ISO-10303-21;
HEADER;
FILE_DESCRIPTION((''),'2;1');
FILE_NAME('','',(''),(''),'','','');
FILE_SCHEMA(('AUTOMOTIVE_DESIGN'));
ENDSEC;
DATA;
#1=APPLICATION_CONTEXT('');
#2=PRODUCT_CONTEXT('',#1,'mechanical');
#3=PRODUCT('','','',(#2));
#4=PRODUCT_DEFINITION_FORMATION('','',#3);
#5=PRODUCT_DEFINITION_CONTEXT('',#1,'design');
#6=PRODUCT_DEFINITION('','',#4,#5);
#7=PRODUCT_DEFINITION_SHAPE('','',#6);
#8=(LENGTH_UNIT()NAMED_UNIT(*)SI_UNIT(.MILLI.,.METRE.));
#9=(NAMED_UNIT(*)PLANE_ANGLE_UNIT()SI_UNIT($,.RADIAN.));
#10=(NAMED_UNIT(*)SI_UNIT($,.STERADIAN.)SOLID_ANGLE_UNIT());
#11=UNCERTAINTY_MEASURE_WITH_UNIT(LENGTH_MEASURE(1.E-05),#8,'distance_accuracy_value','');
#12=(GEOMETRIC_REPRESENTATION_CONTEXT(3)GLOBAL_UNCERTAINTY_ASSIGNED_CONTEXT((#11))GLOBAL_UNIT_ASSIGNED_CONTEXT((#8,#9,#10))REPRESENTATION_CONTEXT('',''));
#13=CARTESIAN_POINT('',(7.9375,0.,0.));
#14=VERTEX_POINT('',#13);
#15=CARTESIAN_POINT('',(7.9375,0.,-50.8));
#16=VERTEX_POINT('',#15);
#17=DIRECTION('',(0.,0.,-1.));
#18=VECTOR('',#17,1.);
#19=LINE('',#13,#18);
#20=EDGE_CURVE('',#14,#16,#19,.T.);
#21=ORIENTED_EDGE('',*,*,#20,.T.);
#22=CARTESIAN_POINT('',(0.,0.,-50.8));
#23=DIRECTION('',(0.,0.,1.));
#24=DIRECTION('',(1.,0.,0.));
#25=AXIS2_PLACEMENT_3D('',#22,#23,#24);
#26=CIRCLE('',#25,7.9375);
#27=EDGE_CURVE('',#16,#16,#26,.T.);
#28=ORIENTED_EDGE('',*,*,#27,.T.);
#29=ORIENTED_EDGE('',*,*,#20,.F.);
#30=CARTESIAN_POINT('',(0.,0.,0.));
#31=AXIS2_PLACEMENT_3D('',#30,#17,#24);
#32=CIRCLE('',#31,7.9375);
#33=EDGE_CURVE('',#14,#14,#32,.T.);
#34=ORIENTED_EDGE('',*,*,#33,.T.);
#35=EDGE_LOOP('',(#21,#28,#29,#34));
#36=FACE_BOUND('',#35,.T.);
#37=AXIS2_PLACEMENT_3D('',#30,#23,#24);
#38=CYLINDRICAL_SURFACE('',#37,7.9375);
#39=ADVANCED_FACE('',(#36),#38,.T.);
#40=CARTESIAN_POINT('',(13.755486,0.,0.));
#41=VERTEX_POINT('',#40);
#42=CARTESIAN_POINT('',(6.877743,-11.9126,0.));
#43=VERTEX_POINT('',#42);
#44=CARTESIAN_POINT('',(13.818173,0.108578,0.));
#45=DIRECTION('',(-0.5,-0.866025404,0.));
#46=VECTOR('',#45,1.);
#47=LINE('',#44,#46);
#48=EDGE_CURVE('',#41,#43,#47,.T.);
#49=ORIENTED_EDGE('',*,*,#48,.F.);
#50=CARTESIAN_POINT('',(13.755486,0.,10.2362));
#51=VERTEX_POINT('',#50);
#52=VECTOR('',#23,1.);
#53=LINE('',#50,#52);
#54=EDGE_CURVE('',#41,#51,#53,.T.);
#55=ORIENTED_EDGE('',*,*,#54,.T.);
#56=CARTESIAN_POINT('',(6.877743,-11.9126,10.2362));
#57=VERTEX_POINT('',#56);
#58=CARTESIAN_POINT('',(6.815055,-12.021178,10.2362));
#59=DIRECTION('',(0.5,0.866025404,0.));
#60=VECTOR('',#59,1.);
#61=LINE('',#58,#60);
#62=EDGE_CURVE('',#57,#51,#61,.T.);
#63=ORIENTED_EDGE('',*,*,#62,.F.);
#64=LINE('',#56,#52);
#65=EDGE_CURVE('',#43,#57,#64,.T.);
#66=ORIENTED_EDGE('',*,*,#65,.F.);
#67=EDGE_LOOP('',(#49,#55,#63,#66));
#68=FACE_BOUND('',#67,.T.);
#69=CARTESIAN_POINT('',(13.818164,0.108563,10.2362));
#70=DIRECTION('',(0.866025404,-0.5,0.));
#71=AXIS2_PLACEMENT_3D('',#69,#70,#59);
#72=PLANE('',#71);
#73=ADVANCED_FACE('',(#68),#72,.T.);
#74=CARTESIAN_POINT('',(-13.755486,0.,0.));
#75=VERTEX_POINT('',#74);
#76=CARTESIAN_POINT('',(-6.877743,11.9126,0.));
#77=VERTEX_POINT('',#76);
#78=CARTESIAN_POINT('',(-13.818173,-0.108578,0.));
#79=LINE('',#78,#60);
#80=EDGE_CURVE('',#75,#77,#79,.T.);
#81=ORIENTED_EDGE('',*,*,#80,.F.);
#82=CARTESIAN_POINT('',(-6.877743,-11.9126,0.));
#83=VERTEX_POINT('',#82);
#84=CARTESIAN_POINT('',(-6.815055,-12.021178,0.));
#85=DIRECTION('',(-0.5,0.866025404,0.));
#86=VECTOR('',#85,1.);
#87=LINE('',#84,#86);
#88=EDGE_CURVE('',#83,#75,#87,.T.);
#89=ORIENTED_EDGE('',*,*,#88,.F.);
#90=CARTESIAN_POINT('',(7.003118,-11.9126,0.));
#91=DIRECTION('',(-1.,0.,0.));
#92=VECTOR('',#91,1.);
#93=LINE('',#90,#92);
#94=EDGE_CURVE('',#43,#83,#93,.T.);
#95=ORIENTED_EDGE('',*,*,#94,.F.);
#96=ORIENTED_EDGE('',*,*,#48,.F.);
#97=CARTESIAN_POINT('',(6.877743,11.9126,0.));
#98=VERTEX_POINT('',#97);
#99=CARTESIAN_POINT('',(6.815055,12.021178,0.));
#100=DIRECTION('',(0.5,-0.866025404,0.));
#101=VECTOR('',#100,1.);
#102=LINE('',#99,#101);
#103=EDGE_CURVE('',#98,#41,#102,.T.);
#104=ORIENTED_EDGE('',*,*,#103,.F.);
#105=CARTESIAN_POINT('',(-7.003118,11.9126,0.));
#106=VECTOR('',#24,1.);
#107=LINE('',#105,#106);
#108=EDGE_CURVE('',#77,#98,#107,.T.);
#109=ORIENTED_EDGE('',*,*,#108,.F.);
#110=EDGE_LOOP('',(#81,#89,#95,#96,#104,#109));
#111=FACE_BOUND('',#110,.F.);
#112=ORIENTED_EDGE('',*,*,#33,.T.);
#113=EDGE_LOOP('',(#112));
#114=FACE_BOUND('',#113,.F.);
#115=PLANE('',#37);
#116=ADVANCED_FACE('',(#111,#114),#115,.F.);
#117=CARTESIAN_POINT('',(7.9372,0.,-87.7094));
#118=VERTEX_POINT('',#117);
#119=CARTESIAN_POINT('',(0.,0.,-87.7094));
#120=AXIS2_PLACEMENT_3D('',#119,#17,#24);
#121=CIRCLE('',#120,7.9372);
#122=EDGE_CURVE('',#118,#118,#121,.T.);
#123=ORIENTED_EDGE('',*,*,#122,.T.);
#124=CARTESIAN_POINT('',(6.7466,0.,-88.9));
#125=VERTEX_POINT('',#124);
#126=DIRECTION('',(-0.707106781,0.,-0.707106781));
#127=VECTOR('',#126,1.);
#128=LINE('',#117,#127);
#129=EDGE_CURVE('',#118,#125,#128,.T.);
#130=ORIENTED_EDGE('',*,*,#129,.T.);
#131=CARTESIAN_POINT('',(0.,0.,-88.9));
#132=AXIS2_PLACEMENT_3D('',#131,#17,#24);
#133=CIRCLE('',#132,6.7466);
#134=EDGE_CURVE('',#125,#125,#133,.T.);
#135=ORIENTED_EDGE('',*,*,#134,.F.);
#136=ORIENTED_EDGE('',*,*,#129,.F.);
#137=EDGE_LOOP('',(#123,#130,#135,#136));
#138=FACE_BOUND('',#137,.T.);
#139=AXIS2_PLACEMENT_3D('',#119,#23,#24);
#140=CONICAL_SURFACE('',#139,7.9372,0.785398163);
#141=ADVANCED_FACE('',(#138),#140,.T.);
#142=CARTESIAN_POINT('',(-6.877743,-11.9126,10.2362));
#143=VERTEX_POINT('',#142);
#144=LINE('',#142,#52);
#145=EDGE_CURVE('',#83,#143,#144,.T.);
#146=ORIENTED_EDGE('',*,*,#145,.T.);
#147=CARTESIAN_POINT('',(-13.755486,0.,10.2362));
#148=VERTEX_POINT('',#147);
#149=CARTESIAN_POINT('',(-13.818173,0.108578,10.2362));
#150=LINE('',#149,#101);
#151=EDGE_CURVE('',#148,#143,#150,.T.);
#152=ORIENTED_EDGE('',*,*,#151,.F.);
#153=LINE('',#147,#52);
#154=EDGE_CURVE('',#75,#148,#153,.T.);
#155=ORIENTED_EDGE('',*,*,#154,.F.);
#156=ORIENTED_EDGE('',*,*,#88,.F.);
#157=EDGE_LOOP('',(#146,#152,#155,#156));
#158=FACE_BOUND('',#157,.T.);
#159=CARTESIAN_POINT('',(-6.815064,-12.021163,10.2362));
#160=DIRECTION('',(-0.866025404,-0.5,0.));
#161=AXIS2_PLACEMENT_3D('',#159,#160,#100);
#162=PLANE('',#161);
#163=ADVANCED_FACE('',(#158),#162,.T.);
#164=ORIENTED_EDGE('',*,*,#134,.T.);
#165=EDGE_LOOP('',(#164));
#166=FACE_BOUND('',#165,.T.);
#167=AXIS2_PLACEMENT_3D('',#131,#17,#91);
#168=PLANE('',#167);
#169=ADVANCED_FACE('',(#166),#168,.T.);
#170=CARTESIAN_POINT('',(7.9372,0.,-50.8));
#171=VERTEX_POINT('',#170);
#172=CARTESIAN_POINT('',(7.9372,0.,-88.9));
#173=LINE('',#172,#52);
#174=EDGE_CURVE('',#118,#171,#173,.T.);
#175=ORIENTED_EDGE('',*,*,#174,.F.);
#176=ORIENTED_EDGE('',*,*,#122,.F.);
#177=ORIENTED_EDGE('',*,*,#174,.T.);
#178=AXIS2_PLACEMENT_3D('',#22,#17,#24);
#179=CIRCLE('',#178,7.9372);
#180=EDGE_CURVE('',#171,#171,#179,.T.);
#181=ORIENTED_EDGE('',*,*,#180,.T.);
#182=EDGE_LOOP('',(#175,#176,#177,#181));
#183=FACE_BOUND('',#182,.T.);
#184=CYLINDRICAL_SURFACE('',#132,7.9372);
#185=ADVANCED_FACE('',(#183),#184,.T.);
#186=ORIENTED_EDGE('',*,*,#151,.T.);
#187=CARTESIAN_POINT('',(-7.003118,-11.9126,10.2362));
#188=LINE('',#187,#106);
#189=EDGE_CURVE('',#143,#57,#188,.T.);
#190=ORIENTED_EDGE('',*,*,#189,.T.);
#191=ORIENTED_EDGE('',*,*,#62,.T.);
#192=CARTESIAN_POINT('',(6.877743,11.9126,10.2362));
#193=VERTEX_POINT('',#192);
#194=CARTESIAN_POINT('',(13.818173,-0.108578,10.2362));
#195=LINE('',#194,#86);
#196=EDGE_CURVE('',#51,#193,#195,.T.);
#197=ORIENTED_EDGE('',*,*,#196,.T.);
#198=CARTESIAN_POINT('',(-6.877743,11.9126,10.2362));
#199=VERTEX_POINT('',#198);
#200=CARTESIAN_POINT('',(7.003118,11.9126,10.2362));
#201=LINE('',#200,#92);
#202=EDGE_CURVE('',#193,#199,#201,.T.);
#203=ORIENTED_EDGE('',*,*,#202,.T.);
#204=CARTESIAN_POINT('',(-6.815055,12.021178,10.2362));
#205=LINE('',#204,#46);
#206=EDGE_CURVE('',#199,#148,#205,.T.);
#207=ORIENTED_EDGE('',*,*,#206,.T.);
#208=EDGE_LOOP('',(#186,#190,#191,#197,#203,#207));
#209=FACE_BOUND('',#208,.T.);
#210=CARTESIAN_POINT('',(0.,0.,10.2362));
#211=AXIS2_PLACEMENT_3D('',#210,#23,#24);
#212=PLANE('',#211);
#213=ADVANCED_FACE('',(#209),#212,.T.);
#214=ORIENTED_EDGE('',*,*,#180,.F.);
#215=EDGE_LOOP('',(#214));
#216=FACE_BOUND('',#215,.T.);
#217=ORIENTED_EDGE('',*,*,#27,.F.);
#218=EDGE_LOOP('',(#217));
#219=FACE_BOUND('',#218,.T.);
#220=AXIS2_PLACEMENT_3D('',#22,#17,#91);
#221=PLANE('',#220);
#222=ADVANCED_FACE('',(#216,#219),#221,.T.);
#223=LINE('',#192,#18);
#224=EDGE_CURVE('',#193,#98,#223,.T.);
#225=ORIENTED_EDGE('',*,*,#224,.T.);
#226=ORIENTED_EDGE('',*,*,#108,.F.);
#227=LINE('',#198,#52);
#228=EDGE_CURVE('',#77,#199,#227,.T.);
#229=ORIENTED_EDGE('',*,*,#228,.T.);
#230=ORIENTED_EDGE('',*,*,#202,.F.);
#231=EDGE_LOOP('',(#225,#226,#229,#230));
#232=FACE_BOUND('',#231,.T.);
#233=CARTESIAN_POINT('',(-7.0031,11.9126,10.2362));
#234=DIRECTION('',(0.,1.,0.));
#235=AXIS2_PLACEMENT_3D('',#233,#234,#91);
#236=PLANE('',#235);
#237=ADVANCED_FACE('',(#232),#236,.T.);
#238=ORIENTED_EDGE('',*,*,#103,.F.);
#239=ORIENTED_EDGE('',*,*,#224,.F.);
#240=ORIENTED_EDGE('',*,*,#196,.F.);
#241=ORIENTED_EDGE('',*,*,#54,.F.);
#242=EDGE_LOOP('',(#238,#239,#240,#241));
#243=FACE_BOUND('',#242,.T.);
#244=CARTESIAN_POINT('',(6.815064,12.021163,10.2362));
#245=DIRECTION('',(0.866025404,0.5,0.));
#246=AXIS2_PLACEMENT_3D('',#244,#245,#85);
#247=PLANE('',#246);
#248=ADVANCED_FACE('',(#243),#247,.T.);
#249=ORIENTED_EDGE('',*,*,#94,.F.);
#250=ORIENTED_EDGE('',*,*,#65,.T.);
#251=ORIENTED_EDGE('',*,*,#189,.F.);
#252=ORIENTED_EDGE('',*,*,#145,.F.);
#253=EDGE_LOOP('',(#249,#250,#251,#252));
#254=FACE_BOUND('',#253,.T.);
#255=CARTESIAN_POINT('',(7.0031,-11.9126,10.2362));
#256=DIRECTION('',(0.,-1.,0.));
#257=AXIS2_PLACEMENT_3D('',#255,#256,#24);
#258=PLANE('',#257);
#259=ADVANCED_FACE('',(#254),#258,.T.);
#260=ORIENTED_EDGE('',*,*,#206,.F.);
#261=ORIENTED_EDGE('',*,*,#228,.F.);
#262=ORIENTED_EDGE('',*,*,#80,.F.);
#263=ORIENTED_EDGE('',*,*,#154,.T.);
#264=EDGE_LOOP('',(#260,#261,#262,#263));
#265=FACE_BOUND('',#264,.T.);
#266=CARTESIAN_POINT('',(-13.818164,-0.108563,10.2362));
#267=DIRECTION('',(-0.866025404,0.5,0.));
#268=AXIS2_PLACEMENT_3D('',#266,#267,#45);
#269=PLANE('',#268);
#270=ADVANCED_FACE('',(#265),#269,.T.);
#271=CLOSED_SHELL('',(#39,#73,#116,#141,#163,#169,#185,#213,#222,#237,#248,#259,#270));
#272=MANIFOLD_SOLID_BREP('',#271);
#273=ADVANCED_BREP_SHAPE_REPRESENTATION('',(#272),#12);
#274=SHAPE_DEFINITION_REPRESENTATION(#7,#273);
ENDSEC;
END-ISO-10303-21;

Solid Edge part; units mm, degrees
sketch "Sketch1" plane through (0, 0, 0) normal (0, 0, 1) x (1, 0, 0)
  circle A0 centre (0, 0) radius 13.8186
  dimension "D1" = 27.6372
extrude "Protrusion1" add sketch "Sketch1" along normal blind 10.2362
sketch "Sketch2" plane through (0, 0, 0) normal (0, 0, -1) x (1, 0, 0)
  circle A0 centre (0, 0) radius 7.9375
extrude "Protrusion2" add sketch "Sketch2" along normal blind 88.9
sketch "Sketch3" plane through (0, 0, -88.9) normal (0, 0, -1) x (1, 0, 0)
  circle A0 centre (0, 0) radius 7.9372
extrude "Cutout1" cut sketch "Sketch3" against normal blind 38.1 flip side to cut
chamfer "Chamfer_1" distance 1.1906 angle 45 1 edges at (-7.9372, 0, -88.9)
sketch "Sketch4" plane through (0, 0, 10.2362) normal (0, 0, 1) x (1, 0, 0)
  line L0 (-7.0031, 11.9126) -> (7.0031, 11.9126)
  dimension "D1" = 23.8252
extrude "Cutout2" cut sketch "Sketch4" against normal up to next material side at (0, 11.9626, 10.2362)
pattern_circular "Pattern1" count 6 over 360 about axis through (0, 0, 10.2362) along (0, 0, 1) of "Cutout2"
properties part number "24104622"
